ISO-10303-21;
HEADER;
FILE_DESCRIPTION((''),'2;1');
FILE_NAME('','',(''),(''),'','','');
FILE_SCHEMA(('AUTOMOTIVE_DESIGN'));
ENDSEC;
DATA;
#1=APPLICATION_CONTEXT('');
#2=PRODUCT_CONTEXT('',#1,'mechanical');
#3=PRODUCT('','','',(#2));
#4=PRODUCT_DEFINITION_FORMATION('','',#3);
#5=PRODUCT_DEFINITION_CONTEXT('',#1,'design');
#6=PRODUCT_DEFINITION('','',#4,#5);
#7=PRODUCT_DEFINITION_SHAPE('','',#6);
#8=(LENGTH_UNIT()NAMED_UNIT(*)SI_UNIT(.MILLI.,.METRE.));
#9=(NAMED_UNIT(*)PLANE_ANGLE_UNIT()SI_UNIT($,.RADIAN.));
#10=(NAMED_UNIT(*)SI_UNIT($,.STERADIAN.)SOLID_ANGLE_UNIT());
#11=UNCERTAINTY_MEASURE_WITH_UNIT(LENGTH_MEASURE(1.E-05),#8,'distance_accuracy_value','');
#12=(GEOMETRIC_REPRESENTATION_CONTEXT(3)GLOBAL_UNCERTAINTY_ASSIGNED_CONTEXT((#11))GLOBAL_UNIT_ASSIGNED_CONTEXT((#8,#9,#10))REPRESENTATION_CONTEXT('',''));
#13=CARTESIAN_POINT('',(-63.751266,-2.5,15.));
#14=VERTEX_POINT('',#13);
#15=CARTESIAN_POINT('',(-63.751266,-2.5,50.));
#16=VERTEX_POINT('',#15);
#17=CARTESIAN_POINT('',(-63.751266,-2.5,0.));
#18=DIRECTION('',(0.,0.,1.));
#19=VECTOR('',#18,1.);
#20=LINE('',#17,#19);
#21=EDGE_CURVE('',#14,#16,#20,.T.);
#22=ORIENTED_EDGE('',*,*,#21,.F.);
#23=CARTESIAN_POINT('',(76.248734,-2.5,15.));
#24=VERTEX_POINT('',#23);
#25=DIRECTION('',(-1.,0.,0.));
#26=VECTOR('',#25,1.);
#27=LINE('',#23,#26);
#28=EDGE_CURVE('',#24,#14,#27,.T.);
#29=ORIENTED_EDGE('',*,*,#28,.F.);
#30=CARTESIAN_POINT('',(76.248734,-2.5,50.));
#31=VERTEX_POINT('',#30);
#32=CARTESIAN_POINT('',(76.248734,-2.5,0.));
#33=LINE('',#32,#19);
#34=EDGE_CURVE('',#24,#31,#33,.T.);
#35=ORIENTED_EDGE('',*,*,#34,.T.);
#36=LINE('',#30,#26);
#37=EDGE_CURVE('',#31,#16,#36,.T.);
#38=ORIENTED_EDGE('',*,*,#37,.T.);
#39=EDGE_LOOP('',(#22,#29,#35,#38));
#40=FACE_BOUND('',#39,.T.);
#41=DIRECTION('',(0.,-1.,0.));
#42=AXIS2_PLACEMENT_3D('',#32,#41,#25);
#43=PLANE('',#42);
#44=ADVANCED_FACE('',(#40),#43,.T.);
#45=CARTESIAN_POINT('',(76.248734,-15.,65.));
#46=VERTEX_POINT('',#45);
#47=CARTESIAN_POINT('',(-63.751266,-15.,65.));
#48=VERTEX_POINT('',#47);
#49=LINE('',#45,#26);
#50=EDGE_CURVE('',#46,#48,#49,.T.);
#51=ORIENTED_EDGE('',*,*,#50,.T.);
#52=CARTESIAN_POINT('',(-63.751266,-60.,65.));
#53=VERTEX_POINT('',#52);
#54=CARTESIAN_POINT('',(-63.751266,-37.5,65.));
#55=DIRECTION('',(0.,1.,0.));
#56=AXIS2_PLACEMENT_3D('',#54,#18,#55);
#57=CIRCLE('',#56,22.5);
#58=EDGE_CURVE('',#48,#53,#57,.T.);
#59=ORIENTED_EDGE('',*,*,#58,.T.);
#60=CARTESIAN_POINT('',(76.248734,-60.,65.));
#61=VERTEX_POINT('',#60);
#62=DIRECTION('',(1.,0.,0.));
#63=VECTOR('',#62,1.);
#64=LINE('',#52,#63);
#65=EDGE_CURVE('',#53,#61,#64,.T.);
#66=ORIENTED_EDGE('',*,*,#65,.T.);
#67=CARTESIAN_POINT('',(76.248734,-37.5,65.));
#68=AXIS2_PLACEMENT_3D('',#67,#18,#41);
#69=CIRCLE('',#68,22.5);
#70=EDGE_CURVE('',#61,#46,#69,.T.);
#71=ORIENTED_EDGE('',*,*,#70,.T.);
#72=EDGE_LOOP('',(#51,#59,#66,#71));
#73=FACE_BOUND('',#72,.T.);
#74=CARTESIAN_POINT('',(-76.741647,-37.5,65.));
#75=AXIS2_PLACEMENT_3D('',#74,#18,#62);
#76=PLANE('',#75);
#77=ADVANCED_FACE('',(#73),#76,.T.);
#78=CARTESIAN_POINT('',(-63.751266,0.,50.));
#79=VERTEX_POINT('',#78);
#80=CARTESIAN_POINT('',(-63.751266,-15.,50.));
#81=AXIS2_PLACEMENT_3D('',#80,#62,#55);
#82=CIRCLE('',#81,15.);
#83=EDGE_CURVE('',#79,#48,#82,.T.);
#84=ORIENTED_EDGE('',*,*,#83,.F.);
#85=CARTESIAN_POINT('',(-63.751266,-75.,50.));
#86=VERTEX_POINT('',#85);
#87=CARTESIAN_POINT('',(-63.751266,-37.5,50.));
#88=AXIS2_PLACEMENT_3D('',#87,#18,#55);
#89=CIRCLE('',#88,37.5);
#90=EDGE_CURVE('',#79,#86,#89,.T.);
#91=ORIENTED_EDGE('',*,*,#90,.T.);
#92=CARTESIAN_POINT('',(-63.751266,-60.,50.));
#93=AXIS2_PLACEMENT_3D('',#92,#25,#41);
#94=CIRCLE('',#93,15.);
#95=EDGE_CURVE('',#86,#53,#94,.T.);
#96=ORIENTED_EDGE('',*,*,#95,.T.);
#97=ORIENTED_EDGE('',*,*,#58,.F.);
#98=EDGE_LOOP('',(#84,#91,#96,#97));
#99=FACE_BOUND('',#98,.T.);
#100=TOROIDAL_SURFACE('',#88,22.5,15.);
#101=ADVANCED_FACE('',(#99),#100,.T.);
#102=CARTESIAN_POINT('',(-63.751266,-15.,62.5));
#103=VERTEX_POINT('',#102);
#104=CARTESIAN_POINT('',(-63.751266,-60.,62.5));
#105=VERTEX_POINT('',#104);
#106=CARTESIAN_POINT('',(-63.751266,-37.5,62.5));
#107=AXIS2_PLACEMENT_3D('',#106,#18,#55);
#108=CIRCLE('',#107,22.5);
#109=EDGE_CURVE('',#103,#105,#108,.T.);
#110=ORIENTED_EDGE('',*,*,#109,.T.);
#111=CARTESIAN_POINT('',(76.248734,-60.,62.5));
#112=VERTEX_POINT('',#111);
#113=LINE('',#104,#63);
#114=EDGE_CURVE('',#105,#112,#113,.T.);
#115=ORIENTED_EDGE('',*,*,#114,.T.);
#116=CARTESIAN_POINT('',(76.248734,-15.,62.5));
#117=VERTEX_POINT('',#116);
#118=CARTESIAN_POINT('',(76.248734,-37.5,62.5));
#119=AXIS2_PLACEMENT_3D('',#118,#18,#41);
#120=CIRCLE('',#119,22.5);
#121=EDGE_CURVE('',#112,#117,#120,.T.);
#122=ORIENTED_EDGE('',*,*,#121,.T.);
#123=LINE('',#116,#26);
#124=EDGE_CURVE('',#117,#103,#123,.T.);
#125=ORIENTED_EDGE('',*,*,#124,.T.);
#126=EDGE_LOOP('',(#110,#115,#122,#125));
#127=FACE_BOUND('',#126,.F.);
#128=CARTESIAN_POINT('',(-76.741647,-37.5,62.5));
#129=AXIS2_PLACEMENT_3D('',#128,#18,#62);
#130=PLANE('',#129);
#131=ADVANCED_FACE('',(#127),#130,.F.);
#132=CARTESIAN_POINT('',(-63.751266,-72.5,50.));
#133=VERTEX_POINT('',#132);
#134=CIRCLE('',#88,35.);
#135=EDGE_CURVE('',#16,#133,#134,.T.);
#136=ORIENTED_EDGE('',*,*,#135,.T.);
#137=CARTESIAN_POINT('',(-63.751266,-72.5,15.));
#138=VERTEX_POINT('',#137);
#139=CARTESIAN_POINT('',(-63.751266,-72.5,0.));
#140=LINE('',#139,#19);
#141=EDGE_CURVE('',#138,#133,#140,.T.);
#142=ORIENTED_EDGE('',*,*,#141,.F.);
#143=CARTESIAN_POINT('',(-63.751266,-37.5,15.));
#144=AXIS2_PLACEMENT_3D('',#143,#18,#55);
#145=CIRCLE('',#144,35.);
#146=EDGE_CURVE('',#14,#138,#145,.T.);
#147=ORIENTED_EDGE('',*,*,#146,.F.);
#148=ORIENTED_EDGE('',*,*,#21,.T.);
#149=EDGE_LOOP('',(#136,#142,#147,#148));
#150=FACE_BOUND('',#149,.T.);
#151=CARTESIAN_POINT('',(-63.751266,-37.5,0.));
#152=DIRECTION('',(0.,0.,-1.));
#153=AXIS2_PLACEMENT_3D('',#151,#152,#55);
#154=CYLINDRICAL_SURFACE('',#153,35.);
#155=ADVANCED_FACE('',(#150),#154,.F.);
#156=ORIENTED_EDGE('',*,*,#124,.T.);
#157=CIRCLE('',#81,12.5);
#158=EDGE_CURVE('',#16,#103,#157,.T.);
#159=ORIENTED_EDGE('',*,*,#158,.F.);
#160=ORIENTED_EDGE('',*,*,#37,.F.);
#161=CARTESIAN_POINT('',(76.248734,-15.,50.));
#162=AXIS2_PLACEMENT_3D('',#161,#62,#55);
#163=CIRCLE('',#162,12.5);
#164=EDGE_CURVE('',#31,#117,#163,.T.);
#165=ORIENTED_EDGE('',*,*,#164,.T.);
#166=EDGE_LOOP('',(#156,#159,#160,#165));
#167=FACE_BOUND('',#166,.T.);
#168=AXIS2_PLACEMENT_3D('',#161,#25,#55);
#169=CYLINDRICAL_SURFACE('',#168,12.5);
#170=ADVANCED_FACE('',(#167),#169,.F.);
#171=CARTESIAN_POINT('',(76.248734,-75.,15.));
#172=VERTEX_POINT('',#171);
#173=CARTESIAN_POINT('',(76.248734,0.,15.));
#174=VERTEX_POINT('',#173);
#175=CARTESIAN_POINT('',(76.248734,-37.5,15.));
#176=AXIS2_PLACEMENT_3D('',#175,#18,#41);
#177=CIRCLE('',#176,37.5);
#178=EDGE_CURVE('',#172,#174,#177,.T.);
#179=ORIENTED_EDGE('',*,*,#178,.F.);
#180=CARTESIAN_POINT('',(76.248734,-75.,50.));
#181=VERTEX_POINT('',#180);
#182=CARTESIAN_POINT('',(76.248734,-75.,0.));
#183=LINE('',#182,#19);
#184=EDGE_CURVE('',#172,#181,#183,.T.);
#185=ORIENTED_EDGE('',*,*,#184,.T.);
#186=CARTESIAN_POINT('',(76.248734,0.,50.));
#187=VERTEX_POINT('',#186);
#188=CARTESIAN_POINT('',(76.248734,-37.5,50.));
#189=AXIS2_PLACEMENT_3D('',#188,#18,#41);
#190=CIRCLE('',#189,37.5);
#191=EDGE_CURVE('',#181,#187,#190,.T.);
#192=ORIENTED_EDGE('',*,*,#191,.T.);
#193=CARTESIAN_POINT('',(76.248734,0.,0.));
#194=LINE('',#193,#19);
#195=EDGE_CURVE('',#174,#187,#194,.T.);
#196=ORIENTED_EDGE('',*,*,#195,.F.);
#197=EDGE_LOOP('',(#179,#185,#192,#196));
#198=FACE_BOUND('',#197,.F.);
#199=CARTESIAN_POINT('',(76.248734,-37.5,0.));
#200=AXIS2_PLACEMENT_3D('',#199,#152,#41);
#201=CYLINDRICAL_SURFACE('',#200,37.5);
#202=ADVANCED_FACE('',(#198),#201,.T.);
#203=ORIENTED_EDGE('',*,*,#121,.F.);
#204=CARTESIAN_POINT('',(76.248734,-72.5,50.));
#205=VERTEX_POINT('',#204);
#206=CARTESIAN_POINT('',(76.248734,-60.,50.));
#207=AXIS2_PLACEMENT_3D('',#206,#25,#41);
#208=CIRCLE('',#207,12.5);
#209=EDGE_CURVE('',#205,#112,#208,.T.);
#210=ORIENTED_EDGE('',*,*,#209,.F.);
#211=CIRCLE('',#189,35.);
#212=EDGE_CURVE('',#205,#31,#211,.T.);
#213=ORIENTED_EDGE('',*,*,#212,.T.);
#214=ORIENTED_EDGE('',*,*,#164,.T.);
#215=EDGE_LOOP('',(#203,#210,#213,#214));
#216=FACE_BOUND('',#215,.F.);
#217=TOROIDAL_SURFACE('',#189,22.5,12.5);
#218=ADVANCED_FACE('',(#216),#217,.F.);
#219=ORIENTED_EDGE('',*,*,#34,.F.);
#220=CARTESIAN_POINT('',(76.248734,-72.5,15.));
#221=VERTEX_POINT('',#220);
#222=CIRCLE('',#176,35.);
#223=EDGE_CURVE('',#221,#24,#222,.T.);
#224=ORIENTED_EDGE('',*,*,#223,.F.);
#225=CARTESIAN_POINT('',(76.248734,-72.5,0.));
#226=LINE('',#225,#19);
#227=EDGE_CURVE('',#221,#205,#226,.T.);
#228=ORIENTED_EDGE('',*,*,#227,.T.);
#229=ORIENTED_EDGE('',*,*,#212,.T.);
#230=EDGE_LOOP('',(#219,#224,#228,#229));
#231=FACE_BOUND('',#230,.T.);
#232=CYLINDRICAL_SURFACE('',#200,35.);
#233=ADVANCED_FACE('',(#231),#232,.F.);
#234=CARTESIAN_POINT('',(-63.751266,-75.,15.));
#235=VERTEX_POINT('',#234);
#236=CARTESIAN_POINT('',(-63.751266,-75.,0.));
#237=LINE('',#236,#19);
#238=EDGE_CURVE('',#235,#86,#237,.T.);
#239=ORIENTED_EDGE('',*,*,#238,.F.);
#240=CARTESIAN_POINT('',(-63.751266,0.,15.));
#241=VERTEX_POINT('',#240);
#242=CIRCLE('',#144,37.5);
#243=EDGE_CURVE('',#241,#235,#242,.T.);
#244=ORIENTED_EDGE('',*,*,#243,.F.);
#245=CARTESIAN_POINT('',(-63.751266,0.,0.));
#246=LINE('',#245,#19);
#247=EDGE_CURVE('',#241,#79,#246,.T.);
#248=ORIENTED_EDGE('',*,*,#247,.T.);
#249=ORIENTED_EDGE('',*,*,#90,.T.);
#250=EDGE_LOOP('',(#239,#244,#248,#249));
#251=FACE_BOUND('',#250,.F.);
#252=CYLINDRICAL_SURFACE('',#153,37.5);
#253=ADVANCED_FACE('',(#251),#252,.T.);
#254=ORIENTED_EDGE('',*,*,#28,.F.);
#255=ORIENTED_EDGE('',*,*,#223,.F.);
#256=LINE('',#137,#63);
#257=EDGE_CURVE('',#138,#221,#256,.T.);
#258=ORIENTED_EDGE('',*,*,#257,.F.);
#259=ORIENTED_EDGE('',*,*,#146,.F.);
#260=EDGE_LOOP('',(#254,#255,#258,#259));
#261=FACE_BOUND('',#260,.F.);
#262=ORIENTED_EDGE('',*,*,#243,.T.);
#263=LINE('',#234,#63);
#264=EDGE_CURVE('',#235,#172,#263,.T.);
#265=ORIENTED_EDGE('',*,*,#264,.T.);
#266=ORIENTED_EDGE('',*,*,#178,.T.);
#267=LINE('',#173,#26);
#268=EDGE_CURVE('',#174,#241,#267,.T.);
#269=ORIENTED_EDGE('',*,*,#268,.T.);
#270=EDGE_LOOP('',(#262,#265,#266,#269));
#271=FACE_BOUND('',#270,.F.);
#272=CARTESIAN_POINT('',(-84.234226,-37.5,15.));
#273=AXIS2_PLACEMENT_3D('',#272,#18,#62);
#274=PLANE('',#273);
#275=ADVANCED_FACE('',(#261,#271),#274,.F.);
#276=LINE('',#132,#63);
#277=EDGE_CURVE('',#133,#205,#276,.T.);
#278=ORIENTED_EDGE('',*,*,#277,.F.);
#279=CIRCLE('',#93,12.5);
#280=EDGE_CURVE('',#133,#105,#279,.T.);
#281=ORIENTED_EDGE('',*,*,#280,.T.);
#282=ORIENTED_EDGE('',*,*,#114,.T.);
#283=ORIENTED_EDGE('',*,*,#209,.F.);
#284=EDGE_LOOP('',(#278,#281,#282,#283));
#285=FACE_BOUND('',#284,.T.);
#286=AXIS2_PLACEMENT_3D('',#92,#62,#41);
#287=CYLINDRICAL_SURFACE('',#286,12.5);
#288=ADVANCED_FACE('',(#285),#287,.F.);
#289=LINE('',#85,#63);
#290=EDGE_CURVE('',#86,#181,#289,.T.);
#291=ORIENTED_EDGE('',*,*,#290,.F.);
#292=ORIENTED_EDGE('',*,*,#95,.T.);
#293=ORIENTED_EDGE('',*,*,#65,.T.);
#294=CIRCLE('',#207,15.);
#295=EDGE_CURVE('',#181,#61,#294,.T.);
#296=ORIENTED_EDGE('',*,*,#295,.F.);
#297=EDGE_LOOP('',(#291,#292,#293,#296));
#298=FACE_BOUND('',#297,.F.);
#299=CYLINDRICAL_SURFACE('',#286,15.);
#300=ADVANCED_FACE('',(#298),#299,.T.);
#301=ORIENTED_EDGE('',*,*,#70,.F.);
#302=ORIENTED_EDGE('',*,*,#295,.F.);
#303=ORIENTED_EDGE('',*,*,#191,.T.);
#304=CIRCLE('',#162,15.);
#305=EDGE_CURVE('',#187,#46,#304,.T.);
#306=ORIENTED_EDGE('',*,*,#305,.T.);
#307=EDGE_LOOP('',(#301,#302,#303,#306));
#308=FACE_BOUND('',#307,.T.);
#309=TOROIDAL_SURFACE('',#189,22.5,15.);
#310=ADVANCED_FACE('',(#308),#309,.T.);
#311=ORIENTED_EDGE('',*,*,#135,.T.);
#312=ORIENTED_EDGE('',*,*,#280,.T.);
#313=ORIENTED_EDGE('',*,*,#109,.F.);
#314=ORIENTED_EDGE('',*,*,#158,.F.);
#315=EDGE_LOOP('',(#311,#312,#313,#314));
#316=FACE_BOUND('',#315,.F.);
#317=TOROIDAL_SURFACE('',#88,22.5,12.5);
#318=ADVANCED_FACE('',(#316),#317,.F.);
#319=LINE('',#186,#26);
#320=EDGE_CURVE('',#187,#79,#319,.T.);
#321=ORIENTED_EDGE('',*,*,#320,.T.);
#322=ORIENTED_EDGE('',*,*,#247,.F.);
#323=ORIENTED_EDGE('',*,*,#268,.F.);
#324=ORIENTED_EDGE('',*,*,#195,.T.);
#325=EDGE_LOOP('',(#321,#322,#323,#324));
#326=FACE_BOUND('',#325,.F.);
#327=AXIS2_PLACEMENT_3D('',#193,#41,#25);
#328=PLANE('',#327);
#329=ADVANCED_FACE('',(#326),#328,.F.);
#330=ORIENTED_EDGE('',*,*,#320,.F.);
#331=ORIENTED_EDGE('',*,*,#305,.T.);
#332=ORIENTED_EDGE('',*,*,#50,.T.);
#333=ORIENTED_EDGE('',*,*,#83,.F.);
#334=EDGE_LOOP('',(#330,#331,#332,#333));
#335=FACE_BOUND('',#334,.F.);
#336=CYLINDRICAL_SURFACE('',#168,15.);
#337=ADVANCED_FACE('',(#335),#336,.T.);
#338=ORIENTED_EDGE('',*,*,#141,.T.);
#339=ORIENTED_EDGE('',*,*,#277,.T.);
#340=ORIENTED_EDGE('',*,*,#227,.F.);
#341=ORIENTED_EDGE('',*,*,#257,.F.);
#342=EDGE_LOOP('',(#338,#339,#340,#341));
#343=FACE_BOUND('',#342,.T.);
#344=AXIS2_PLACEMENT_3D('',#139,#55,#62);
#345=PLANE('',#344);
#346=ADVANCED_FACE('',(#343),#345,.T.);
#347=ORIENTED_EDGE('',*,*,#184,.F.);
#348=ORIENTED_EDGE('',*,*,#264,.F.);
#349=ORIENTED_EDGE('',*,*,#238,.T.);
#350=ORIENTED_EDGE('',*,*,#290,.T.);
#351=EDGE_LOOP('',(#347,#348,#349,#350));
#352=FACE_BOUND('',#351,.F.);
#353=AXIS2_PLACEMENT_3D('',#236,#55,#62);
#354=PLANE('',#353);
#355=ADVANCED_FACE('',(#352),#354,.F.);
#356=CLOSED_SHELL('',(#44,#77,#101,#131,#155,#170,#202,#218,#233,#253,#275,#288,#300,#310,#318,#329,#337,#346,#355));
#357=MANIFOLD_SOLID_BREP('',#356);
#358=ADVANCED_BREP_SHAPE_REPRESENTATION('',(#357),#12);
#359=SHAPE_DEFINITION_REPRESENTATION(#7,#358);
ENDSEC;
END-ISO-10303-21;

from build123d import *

# Parameters (mm, degrees)
F0_W     = 63.7512656803
F0_H     = 75
F0_W_2   = 76.2487343197
F1_DEPTH = 65
F2_R     = 15
F3_T     = 2.5


# Not quite as in the source:
# - a shell that OpenCascade refuses in one call is made with other operations: the cavity is built on its own and cut out


with BuildPart() as f1:
    # F0 (on Top) → F1 (new body)
    with BuildSketch(Plane.XY):
        with BuildLine():
            Line((-63.7512656803, -75), (-63.7512656803, 0))
            ThreePointArc((-63.7512656803, 0), (-101.2512656803, -37.5), (-63.7512656803, -75))
        make_face()
        with Locations((-31.8756328402, -37.5)):
            Rectangle(F0_W, F0_H)
        with Locations((38.1243671598, -37.5)):
            Rectangle(F0_W_2, F0_H)
        with BuildLine():
            ThreePointArc((76.2487343197, -75), (113.7487343197, -37.5), (76.2487343197, 0))
            Line((76.2487343197, 0), (76.2487343197, -75))
        make_face()
    extrude(amount=F1_DEPTH)

    # F2
    f2_edges = [f1.edges().sort_by_distance(p)[0] for p in [
        (-101.251266, -37.5, 65),
        (113.748734, -37.5, 0),
        (6.248734, -75, 65),
        (113.748734, -37.5, 65),
        (6.248734, 0, 65),
    ]]
    fillet(f2_edges, radius=F2_R)

    # F3: shell of thickness 2.5, made by hand


with BuildPart() as f3_core1:
    # F3_t2: copy of F1
    add(f1.part)

    # the walls: a layer under each face that stays
    f3_faces = [f3_core1.faces().sort_by_distance(p)[0] for p in [
        (-101.2512656803, -37.5, 32.5),
        (6.2487343197, 0, 32.5),
        (-96.8578673981, -37.5, 60.6066017178),
        (6.2487343197, -75, 32.5),
        (113.7487343197, -37.5, 32.5),
        (6.2487343197, -4.3933982822, 60.6066017178),
        (6.2487343197, -37.5, 65),
        (6.2487343197, -70.6066017178, 60.6066017178),
        (109.3553360375, -37.5, 60.6066017178),
    ]]
    thicken(f3_faces, amount=-F3_T, mode=Mode.SUBTRACT)


with BuildPart() as f1_1:
    add(f1.part)

    # what is left inside the walls is the cavity
    f3_cavity = [f3_core1.part.solids().sort_by_distance(p)[0] for p in [
        (6.248734, -45, 0.025),
    ]]
    add(f3_cavity, mode=Mode.SUBTRACT)


solid = f1_1.part
